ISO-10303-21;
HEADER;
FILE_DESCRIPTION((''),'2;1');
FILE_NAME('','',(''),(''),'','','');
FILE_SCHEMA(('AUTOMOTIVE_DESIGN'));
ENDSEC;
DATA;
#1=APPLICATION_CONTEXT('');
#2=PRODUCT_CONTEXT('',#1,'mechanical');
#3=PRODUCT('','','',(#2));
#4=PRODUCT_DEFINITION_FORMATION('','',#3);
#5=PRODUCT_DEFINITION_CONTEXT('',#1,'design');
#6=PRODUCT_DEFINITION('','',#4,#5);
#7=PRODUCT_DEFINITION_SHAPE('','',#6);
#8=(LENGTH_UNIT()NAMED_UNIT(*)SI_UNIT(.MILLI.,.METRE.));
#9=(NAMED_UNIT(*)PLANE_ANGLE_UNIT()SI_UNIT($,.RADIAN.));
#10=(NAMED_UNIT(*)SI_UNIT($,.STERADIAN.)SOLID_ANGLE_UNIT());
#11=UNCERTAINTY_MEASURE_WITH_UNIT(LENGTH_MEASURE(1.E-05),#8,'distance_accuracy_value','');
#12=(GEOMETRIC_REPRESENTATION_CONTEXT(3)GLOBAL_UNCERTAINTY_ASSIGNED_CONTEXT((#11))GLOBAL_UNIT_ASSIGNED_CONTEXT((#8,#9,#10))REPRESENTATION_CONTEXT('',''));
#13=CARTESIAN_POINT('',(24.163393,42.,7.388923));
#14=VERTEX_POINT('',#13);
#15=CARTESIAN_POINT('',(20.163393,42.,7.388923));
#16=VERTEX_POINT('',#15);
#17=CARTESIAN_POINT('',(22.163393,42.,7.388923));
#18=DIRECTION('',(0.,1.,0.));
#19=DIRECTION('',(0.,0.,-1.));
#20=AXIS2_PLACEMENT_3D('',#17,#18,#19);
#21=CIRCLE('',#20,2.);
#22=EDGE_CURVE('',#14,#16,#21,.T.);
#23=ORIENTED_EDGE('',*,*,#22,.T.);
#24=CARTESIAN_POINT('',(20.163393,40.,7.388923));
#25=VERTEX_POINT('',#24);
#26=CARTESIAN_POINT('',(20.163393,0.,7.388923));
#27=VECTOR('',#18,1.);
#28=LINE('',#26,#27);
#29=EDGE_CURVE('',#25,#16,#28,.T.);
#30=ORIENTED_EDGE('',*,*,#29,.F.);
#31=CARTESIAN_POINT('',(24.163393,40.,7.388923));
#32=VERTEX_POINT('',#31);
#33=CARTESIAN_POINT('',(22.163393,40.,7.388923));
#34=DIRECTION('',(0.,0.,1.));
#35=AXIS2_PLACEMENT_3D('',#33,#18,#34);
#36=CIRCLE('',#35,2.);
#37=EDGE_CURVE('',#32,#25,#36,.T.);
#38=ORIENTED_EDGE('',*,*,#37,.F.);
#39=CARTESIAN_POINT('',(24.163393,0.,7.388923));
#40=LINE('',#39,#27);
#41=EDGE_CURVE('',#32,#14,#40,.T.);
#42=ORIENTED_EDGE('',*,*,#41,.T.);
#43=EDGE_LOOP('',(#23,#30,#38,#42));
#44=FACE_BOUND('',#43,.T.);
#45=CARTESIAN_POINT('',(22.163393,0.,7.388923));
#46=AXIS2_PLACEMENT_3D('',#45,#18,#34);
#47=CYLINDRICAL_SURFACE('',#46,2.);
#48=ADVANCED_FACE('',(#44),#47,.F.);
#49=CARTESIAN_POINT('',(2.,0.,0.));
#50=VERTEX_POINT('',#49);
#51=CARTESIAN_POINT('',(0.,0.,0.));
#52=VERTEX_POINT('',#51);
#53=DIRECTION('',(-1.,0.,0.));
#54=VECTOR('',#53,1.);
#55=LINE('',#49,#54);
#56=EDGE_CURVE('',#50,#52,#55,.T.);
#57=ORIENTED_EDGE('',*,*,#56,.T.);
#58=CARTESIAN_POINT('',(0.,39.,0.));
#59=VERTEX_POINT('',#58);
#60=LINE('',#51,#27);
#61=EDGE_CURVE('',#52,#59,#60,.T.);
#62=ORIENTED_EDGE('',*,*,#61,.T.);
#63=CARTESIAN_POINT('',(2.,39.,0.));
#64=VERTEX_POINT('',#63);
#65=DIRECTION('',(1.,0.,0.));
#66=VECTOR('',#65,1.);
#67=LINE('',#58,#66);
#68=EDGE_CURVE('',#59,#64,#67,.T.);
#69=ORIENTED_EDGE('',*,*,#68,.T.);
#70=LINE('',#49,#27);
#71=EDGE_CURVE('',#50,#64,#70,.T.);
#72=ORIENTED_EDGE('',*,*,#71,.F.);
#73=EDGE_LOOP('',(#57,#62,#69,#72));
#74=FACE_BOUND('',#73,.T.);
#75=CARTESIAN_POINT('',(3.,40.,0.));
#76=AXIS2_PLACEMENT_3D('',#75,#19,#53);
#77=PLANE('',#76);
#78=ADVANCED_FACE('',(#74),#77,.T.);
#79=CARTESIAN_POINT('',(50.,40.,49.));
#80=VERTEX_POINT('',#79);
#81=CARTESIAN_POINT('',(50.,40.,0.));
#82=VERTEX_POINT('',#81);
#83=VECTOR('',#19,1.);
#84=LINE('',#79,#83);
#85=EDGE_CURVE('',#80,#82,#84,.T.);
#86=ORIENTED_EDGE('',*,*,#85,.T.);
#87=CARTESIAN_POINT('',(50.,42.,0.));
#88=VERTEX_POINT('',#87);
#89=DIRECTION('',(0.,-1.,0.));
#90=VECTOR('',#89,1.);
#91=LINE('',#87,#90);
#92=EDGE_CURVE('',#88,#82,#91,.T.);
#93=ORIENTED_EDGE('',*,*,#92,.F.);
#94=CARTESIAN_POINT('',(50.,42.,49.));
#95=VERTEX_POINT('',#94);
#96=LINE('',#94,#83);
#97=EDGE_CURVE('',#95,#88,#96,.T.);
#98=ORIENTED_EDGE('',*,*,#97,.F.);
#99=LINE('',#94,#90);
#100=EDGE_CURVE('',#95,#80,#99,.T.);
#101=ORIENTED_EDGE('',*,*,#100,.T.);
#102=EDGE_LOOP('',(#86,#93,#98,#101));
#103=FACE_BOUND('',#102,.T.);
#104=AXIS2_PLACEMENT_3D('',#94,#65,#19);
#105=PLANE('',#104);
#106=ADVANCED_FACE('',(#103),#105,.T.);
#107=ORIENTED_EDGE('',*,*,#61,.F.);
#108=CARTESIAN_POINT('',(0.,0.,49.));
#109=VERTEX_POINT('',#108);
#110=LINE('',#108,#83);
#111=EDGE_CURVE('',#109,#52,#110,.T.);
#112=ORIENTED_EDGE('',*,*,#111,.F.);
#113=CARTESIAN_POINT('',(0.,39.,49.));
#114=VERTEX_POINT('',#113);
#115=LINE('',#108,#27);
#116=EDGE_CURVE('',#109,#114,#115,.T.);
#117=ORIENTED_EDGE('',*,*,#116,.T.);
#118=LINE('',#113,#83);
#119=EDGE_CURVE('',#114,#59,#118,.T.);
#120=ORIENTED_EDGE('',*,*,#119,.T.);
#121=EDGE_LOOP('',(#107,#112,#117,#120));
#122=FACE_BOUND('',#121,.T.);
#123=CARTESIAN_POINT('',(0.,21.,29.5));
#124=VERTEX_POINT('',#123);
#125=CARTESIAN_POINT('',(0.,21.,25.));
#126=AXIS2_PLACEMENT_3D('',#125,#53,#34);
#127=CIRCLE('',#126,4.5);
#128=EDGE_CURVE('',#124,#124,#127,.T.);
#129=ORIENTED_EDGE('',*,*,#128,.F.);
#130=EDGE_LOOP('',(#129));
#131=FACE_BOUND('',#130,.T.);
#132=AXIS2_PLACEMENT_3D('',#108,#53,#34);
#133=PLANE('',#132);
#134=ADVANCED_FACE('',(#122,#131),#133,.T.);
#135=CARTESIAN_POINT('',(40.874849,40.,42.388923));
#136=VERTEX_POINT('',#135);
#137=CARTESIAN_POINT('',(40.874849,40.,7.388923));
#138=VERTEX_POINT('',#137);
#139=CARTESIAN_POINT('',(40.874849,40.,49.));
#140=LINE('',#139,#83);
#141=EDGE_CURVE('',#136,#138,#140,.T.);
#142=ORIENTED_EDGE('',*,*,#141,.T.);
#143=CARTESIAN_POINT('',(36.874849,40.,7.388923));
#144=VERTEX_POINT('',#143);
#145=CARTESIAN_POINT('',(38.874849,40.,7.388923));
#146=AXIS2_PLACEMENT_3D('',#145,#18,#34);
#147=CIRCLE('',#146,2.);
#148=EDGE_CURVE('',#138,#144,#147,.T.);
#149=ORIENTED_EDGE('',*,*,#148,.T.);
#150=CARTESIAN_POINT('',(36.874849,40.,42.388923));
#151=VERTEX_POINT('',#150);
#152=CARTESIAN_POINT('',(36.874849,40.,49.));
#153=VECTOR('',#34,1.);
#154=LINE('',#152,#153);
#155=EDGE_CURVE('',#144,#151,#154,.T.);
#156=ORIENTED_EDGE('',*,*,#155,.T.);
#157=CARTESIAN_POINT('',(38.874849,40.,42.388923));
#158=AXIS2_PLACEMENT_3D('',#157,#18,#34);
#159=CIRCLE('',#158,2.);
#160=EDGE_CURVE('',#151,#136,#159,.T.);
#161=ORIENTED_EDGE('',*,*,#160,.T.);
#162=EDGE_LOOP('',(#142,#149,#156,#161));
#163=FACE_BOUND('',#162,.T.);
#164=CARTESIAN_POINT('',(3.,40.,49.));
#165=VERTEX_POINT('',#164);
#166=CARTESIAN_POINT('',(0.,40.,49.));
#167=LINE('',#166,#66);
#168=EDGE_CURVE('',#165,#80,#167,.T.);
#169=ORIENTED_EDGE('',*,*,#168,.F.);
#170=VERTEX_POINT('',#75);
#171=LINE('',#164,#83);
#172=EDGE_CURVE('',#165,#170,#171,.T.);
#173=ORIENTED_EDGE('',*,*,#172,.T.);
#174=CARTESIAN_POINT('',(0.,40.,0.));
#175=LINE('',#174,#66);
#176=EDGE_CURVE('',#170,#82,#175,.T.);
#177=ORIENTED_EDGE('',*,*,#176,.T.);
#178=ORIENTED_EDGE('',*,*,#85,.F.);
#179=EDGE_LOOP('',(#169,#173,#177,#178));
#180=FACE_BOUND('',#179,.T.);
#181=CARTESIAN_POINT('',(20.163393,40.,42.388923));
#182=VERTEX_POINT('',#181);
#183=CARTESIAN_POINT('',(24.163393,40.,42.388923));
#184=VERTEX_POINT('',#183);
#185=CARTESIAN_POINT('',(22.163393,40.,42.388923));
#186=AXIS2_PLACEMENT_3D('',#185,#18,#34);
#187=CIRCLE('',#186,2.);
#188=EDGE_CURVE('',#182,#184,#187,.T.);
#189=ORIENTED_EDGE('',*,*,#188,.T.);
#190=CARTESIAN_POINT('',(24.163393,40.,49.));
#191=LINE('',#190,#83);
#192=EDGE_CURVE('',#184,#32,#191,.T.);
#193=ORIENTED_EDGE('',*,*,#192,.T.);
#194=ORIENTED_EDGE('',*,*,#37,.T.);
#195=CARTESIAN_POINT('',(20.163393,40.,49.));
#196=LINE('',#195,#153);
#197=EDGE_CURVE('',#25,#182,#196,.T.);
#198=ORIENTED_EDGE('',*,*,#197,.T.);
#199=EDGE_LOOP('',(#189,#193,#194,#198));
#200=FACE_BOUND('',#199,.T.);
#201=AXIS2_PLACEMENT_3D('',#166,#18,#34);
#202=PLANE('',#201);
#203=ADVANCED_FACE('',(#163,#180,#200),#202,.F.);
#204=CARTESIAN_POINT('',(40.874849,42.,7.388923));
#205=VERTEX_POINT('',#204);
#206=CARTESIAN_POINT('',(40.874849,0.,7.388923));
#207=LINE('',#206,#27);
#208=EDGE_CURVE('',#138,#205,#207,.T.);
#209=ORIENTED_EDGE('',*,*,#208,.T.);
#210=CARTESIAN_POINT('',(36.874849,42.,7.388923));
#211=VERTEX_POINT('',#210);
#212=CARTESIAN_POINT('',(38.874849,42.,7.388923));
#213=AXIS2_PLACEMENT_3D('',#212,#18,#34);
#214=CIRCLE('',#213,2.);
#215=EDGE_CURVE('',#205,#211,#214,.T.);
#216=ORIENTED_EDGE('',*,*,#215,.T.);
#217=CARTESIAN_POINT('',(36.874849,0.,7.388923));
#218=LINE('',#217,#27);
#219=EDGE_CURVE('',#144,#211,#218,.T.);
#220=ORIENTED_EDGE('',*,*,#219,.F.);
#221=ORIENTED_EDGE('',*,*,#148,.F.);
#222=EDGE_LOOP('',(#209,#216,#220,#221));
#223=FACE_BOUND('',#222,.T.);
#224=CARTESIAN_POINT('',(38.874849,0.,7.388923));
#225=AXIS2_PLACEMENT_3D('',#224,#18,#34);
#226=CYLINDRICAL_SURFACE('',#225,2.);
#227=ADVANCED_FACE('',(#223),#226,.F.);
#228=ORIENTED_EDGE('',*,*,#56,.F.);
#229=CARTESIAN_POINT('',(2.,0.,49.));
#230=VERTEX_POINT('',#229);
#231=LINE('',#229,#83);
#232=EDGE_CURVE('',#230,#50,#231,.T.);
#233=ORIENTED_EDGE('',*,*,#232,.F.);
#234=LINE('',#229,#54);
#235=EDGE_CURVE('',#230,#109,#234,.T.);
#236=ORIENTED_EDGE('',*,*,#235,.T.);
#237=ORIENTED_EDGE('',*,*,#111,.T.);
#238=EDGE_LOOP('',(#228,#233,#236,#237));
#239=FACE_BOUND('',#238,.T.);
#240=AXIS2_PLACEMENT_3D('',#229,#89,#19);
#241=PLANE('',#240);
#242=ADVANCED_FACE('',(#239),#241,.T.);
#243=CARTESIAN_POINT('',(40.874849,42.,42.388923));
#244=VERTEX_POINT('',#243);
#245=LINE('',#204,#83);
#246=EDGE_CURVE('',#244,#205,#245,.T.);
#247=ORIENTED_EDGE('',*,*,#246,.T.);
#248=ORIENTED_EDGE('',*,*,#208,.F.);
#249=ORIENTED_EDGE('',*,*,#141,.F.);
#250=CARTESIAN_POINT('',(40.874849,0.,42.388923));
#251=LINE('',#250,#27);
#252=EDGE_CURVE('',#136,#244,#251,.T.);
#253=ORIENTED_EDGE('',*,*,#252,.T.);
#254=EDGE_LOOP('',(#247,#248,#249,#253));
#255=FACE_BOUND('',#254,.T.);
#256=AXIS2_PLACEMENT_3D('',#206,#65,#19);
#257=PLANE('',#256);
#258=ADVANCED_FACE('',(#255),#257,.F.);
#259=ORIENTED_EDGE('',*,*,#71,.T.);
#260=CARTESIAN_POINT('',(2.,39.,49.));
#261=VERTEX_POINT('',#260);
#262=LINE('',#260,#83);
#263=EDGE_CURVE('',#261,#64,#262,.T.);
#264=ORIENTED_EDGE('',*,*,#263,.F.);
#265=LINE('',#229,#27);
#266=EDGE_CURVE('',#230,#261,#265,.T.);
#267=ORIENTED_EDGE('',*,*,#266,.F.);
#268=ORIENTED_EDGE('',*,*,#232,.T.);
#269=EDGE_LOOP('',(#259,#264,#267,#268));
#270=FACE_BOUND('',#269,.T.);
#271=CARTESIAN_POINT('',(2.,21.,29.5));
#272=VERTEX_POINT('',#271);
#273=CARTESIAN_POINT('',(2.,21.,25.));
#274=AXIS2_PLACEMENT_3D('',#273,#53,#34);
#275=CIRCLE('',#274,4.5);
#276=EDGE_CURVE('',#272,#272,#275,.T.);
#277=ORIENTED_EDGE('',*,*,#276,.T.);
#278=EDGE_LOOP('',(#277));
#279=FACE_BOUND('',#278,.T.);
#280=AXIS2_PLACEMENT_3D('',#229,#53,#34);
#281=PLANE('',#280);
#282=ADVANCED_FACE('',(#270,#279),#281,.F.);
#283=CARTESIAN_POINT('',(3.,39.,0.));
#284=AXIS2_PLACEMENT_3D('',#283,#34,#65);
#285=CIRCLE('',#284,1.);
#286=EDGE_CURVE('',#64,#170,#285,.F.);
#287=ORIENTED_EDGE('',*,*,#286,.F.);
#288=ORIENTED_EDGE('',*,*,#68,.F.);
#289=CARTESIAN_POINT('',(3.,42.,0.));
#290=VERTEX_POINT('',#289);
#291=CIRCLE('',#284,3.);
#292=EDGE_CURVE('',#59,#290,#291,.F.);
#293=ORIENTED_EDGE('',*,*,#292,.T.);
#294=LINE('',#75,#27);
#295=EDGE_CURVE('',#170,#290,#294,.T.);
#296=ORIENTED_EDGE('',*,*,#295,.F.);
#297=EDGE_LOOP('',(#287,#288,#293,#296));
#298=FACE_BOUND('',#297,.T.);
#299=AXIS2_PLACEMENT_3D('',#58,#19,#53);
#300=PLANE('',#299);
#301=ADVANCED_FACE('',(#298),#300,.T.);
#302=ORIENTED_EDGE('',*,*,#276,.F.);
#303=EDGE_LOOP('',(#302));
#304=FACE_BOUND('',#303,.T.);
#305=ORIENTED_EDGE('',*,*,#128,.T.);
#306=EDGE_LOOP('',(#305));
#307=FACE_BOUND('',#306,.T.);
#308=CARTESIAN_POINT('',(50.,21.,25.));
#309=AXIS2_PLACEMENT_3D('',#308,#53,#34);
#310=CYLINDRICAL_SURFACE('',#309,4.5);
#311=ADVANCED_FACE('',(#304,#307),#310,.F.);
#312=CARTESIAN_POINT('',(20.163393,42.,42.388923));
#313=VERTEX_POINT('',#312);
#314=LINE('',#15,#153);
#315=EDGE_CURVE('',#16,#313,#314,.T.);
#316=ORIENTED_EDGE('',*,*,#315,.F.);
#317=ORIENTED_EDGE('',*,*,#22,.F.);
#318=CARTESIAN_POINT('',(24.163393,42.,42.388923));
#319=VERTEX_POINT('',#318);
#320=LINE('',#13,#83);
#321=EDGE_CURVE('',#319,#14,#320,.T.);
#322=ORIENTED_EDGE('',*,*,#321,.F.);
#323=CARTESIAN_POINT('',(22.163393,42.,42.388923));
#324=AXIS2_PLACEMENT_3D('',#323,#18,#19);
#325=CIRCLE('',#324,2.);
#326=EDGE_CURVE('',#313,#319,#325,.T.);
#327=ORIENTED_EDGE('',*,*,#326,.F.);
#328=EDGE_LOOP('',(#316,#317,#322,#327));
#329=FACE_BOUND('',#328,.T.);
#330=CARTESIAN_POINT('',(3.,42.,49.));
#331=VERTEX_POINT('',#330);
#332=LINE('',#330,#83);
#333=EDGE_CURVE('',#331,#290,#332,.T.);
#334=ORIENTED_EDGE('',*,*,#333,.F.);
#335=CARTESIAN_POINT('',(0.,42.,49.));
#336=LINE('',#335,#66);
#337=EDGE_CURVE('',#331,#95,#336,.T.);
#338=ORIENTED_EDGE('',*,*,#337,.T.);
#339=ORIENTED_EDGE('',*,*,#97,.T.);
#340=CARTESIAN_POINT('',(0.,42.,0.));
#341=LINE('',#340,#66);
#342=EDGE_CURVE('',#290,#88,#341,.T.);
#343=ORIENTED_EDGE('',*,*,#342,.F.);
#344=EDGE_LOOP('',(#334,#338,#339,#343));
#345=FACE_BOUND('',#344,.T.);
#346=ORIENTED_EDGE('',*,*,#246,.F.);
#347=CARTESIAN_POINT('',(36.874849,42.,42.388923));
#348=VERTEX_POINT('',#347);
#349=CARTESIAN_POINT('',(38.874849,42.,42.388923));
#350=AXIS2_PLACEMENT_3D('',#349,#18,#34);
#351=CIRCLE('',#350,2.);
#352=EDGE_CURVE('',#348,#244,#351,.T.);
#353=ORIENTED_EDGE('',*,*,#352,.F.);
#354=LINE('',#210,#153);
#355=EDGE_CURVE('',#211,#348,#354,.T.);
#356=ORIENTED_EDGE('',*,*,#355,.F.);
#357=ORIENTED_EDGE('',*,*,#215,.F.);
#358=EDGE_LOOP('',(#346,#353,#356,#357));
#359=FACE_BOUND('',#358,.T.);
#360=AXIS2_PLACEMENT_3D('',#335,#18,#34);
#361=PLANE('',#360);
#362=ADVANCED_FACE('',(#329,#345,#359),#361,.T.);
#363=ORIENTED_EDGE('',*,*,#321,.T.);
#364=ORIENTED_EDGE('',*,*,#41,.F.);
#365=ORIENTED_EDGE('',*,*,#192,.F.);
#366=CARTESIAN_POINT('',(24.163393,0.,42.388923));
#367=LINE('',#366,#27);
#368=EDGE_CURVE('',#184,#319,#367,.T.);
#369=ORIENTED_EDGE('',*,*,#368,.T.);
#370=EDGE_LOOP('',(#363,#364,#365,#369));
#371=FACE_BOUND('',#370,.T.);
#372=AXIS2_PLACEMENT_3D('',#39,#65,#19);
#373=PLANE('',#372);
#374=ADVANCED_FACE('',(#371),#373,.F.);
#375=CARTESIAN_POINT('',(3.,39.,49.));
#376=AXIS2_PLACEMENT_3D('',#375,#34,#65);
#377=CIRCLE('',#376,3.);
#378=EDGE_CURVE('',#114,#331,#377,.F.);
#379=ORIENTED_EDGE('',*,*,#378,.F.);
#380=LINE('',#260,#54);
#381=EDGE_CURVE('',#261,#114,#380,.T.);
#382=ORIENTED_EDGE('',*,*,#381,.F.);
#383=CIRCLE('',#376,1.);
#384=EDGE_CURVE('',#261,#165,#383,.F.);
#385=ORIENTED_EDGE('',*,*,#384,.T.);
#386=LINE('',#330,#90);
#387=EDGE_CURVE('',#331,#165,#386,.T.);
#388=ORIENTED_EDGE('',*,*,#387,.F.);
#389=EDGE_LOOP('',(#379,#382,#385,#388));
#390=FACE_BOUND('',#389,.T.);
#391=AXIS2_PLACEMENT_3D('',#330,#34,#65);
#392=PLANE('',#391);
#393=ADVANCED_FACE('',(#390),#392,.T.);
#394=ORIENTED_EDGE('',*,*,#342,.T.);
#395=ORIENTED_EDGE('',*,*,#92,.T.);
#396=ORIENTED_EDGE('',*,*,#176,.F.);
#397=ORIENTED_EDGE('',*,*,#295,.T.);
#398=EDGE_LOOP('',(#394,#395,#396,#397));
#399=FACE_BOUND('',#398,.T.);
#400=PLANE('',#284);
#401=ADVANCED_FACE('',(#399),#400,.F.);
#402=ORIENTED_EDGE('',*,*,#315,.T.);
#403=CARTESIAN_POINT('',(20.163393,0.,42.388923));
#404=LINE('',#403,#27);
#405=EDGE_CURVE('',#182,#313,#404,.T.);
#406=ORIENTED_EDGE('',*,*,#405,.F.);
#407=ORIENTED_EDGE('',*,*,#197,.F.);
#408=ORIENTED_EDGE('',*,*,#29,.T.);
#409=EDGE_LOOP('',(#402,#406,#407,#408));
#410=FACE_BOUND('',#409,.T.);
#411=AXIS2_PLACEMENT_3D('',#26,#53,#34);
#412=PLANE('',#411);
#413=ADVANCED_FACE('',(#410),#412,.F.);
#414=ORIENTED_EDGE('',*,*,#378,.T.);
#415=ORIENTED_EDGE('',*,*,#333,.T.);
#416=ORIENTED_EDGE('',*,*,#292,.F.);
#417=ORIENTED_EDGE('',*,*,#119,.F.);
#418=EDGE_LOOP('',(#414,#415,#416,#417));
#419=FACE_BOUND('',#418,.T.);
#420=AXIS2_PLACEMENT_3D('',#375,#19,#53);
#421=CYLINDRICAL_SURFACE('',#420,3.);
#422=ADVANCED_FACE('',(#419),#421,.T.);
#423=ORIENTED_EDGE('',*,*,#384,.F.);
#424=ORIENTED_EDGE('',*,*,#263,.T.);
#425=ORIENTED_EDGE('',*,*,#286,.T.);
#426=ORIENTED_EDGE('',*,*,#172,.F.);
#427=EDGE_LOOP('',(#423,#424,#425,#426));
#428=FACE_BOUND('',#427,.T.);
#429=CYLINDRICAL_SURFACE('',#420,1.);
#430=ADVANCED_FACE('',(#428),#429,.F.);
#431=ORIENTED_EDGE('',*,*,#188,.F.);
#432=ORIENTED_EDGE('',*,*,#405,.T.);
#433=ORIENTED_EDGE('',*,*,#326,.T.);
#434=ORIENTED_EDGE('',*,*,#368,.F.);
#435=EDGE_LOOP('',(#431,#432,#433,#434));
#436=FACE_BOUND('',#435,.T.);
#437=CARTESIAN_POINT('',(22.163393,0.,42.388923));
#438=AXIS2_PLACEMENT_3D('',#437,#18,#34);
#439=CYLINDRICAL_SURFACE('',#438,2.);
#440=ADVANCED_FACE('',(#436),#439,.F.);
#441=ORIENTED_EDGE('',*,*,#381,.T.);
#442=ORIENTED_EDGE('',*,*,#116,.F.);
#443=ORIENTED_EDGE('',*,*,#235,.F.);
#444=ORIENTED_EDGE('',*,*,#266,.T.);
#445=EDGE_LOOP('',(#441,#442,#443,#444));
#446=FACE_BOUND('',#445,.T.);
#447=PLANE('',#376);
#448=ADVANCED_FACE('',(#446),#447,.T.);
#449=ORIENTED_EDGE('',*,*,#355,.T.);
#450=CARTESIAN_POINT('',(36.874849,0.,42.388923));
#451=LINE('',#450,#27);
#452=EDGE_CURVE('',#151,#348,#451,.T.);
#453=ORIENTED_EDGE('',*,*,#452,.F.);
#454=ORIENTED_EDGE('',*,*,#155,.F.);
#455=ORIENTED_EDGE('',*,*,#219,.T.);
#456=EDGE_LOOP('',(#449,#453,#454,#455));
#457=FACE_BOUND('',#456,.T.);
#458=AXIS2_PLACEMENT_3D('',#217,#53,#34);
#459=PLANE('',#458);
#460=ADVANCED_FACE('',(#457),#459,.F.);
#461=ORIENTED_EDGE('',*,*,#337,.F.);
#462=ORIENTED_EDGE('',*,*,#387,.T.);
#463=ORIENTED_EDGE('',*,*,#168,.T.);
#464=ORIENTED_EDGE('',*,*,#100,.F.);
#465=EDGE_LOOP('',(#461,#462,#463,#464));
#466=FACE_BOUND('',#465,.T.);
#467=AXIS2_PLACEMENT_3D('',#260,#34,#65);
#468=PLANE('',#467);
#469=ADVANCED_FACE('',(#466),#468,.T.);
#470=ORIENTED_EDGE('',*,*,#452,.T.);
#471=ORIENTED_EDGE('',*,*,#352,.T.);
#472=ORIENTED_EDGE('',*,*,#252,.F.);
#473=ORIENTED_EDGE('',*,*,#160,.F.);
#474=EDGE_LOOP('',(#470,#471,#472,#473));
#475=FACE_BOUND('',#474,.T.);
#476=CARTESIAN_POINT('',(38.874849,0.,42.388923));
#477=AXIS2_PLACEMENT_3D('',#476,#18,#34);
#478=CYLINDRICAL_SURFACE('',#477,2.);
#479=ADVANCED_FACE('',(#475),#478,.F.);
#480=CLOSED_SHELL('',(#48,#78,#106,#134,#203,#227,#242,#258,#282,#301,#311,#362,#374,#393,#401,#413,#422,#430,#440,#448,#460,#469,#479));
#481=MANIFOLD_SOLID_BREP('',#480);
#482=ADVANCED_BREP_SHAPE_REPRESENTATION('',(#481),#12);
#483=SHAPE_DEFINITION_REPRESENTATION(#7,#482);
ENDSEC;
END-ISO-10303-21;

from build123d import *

# Parameters (mm, degrees)
BASE_FLANGE1_DEPTH = 49
SKETCH7_R          = 4.5
CUT_EXTRUDE1_DEPTH = 82.639451248
CUT_EXTRUDE2_DEPTH = 82.639451248


# Sheet-metal steps are written as plain solids
with BuildPart() as part:
    # Sketch1 → Base-Flange1 (new body)
    with BuildSketch(Plane.XY):
        with BuildLine():
            Line((0, 0), (0, 39))
            ThreePointArc((0, 39), (0.878679656, 41.121320344), (3, 42))
            Line((3, 42), (50, 42))
            Line((50, 42), (50, 40))
            Line((50, 40), (3, 40))
            ThreePointArc((3, 40), (2.292893219, 39.707106781), (2, 39))
            Line((2, 39), (2, 0))
            Line((2, 0), (0, 0))
        make_face()
    extrude(amount=BASE_FLANGE1_DEPTH)

    # Sketch7 → Cut-Extrude1 (cut, through all)
    with BuildSketch(Plane.ZY):
        with Locations((25, 21)):
            Circle(SKETCH7_R)
    extrude(amount=-CUT_EXTRUDE1_DEPTH, mode=Mode.SUBTRACT)

    # Sketch6 → Cut-Extrude2 (cut, through all)
    with BuildSketch(Plane(origin=(0, 42, 0), x_dir=(1, 0, 0), z_dir=(0, 1, 0))):
        with BuildLine():
            Line((40.874848709, -7.388922921), (40.874848709, -42.388922921))
            ThreePointArc((40.874848709, -42.388922921), (38.874848709, -44.388922921), (36.874848709, -42.388922921))
            Line((36.874848709, -42.388922921), (36.874848709, -7.388922921))
            ThreePointArc((36.874848709, -7.388922921), (38.874848709, -5.388922921), (40.874848709, -7.388922921))
        make_face()
        with BuildLine():
            Line((20.163393388, -7.388922921), (20.163393388, -42.388922921))
            ThreePointArc((20.163393388, -42.388922921), (22.163393388, -44.388922921), (24.163393388, -42.388922921))
            Line((24.163393388, -42.388922921), (24.163393388, -7.388922921))
            ThreePointArc((24.163393388, -7.388922921), (22.163393388, -5.388922921), (20.163393388, -7.388922921))
        make_face()
    extrude(amount=-CUT_EXTRUDE2_DEPTH, mode=Mode.SUBTRACT)


solid = part.part
